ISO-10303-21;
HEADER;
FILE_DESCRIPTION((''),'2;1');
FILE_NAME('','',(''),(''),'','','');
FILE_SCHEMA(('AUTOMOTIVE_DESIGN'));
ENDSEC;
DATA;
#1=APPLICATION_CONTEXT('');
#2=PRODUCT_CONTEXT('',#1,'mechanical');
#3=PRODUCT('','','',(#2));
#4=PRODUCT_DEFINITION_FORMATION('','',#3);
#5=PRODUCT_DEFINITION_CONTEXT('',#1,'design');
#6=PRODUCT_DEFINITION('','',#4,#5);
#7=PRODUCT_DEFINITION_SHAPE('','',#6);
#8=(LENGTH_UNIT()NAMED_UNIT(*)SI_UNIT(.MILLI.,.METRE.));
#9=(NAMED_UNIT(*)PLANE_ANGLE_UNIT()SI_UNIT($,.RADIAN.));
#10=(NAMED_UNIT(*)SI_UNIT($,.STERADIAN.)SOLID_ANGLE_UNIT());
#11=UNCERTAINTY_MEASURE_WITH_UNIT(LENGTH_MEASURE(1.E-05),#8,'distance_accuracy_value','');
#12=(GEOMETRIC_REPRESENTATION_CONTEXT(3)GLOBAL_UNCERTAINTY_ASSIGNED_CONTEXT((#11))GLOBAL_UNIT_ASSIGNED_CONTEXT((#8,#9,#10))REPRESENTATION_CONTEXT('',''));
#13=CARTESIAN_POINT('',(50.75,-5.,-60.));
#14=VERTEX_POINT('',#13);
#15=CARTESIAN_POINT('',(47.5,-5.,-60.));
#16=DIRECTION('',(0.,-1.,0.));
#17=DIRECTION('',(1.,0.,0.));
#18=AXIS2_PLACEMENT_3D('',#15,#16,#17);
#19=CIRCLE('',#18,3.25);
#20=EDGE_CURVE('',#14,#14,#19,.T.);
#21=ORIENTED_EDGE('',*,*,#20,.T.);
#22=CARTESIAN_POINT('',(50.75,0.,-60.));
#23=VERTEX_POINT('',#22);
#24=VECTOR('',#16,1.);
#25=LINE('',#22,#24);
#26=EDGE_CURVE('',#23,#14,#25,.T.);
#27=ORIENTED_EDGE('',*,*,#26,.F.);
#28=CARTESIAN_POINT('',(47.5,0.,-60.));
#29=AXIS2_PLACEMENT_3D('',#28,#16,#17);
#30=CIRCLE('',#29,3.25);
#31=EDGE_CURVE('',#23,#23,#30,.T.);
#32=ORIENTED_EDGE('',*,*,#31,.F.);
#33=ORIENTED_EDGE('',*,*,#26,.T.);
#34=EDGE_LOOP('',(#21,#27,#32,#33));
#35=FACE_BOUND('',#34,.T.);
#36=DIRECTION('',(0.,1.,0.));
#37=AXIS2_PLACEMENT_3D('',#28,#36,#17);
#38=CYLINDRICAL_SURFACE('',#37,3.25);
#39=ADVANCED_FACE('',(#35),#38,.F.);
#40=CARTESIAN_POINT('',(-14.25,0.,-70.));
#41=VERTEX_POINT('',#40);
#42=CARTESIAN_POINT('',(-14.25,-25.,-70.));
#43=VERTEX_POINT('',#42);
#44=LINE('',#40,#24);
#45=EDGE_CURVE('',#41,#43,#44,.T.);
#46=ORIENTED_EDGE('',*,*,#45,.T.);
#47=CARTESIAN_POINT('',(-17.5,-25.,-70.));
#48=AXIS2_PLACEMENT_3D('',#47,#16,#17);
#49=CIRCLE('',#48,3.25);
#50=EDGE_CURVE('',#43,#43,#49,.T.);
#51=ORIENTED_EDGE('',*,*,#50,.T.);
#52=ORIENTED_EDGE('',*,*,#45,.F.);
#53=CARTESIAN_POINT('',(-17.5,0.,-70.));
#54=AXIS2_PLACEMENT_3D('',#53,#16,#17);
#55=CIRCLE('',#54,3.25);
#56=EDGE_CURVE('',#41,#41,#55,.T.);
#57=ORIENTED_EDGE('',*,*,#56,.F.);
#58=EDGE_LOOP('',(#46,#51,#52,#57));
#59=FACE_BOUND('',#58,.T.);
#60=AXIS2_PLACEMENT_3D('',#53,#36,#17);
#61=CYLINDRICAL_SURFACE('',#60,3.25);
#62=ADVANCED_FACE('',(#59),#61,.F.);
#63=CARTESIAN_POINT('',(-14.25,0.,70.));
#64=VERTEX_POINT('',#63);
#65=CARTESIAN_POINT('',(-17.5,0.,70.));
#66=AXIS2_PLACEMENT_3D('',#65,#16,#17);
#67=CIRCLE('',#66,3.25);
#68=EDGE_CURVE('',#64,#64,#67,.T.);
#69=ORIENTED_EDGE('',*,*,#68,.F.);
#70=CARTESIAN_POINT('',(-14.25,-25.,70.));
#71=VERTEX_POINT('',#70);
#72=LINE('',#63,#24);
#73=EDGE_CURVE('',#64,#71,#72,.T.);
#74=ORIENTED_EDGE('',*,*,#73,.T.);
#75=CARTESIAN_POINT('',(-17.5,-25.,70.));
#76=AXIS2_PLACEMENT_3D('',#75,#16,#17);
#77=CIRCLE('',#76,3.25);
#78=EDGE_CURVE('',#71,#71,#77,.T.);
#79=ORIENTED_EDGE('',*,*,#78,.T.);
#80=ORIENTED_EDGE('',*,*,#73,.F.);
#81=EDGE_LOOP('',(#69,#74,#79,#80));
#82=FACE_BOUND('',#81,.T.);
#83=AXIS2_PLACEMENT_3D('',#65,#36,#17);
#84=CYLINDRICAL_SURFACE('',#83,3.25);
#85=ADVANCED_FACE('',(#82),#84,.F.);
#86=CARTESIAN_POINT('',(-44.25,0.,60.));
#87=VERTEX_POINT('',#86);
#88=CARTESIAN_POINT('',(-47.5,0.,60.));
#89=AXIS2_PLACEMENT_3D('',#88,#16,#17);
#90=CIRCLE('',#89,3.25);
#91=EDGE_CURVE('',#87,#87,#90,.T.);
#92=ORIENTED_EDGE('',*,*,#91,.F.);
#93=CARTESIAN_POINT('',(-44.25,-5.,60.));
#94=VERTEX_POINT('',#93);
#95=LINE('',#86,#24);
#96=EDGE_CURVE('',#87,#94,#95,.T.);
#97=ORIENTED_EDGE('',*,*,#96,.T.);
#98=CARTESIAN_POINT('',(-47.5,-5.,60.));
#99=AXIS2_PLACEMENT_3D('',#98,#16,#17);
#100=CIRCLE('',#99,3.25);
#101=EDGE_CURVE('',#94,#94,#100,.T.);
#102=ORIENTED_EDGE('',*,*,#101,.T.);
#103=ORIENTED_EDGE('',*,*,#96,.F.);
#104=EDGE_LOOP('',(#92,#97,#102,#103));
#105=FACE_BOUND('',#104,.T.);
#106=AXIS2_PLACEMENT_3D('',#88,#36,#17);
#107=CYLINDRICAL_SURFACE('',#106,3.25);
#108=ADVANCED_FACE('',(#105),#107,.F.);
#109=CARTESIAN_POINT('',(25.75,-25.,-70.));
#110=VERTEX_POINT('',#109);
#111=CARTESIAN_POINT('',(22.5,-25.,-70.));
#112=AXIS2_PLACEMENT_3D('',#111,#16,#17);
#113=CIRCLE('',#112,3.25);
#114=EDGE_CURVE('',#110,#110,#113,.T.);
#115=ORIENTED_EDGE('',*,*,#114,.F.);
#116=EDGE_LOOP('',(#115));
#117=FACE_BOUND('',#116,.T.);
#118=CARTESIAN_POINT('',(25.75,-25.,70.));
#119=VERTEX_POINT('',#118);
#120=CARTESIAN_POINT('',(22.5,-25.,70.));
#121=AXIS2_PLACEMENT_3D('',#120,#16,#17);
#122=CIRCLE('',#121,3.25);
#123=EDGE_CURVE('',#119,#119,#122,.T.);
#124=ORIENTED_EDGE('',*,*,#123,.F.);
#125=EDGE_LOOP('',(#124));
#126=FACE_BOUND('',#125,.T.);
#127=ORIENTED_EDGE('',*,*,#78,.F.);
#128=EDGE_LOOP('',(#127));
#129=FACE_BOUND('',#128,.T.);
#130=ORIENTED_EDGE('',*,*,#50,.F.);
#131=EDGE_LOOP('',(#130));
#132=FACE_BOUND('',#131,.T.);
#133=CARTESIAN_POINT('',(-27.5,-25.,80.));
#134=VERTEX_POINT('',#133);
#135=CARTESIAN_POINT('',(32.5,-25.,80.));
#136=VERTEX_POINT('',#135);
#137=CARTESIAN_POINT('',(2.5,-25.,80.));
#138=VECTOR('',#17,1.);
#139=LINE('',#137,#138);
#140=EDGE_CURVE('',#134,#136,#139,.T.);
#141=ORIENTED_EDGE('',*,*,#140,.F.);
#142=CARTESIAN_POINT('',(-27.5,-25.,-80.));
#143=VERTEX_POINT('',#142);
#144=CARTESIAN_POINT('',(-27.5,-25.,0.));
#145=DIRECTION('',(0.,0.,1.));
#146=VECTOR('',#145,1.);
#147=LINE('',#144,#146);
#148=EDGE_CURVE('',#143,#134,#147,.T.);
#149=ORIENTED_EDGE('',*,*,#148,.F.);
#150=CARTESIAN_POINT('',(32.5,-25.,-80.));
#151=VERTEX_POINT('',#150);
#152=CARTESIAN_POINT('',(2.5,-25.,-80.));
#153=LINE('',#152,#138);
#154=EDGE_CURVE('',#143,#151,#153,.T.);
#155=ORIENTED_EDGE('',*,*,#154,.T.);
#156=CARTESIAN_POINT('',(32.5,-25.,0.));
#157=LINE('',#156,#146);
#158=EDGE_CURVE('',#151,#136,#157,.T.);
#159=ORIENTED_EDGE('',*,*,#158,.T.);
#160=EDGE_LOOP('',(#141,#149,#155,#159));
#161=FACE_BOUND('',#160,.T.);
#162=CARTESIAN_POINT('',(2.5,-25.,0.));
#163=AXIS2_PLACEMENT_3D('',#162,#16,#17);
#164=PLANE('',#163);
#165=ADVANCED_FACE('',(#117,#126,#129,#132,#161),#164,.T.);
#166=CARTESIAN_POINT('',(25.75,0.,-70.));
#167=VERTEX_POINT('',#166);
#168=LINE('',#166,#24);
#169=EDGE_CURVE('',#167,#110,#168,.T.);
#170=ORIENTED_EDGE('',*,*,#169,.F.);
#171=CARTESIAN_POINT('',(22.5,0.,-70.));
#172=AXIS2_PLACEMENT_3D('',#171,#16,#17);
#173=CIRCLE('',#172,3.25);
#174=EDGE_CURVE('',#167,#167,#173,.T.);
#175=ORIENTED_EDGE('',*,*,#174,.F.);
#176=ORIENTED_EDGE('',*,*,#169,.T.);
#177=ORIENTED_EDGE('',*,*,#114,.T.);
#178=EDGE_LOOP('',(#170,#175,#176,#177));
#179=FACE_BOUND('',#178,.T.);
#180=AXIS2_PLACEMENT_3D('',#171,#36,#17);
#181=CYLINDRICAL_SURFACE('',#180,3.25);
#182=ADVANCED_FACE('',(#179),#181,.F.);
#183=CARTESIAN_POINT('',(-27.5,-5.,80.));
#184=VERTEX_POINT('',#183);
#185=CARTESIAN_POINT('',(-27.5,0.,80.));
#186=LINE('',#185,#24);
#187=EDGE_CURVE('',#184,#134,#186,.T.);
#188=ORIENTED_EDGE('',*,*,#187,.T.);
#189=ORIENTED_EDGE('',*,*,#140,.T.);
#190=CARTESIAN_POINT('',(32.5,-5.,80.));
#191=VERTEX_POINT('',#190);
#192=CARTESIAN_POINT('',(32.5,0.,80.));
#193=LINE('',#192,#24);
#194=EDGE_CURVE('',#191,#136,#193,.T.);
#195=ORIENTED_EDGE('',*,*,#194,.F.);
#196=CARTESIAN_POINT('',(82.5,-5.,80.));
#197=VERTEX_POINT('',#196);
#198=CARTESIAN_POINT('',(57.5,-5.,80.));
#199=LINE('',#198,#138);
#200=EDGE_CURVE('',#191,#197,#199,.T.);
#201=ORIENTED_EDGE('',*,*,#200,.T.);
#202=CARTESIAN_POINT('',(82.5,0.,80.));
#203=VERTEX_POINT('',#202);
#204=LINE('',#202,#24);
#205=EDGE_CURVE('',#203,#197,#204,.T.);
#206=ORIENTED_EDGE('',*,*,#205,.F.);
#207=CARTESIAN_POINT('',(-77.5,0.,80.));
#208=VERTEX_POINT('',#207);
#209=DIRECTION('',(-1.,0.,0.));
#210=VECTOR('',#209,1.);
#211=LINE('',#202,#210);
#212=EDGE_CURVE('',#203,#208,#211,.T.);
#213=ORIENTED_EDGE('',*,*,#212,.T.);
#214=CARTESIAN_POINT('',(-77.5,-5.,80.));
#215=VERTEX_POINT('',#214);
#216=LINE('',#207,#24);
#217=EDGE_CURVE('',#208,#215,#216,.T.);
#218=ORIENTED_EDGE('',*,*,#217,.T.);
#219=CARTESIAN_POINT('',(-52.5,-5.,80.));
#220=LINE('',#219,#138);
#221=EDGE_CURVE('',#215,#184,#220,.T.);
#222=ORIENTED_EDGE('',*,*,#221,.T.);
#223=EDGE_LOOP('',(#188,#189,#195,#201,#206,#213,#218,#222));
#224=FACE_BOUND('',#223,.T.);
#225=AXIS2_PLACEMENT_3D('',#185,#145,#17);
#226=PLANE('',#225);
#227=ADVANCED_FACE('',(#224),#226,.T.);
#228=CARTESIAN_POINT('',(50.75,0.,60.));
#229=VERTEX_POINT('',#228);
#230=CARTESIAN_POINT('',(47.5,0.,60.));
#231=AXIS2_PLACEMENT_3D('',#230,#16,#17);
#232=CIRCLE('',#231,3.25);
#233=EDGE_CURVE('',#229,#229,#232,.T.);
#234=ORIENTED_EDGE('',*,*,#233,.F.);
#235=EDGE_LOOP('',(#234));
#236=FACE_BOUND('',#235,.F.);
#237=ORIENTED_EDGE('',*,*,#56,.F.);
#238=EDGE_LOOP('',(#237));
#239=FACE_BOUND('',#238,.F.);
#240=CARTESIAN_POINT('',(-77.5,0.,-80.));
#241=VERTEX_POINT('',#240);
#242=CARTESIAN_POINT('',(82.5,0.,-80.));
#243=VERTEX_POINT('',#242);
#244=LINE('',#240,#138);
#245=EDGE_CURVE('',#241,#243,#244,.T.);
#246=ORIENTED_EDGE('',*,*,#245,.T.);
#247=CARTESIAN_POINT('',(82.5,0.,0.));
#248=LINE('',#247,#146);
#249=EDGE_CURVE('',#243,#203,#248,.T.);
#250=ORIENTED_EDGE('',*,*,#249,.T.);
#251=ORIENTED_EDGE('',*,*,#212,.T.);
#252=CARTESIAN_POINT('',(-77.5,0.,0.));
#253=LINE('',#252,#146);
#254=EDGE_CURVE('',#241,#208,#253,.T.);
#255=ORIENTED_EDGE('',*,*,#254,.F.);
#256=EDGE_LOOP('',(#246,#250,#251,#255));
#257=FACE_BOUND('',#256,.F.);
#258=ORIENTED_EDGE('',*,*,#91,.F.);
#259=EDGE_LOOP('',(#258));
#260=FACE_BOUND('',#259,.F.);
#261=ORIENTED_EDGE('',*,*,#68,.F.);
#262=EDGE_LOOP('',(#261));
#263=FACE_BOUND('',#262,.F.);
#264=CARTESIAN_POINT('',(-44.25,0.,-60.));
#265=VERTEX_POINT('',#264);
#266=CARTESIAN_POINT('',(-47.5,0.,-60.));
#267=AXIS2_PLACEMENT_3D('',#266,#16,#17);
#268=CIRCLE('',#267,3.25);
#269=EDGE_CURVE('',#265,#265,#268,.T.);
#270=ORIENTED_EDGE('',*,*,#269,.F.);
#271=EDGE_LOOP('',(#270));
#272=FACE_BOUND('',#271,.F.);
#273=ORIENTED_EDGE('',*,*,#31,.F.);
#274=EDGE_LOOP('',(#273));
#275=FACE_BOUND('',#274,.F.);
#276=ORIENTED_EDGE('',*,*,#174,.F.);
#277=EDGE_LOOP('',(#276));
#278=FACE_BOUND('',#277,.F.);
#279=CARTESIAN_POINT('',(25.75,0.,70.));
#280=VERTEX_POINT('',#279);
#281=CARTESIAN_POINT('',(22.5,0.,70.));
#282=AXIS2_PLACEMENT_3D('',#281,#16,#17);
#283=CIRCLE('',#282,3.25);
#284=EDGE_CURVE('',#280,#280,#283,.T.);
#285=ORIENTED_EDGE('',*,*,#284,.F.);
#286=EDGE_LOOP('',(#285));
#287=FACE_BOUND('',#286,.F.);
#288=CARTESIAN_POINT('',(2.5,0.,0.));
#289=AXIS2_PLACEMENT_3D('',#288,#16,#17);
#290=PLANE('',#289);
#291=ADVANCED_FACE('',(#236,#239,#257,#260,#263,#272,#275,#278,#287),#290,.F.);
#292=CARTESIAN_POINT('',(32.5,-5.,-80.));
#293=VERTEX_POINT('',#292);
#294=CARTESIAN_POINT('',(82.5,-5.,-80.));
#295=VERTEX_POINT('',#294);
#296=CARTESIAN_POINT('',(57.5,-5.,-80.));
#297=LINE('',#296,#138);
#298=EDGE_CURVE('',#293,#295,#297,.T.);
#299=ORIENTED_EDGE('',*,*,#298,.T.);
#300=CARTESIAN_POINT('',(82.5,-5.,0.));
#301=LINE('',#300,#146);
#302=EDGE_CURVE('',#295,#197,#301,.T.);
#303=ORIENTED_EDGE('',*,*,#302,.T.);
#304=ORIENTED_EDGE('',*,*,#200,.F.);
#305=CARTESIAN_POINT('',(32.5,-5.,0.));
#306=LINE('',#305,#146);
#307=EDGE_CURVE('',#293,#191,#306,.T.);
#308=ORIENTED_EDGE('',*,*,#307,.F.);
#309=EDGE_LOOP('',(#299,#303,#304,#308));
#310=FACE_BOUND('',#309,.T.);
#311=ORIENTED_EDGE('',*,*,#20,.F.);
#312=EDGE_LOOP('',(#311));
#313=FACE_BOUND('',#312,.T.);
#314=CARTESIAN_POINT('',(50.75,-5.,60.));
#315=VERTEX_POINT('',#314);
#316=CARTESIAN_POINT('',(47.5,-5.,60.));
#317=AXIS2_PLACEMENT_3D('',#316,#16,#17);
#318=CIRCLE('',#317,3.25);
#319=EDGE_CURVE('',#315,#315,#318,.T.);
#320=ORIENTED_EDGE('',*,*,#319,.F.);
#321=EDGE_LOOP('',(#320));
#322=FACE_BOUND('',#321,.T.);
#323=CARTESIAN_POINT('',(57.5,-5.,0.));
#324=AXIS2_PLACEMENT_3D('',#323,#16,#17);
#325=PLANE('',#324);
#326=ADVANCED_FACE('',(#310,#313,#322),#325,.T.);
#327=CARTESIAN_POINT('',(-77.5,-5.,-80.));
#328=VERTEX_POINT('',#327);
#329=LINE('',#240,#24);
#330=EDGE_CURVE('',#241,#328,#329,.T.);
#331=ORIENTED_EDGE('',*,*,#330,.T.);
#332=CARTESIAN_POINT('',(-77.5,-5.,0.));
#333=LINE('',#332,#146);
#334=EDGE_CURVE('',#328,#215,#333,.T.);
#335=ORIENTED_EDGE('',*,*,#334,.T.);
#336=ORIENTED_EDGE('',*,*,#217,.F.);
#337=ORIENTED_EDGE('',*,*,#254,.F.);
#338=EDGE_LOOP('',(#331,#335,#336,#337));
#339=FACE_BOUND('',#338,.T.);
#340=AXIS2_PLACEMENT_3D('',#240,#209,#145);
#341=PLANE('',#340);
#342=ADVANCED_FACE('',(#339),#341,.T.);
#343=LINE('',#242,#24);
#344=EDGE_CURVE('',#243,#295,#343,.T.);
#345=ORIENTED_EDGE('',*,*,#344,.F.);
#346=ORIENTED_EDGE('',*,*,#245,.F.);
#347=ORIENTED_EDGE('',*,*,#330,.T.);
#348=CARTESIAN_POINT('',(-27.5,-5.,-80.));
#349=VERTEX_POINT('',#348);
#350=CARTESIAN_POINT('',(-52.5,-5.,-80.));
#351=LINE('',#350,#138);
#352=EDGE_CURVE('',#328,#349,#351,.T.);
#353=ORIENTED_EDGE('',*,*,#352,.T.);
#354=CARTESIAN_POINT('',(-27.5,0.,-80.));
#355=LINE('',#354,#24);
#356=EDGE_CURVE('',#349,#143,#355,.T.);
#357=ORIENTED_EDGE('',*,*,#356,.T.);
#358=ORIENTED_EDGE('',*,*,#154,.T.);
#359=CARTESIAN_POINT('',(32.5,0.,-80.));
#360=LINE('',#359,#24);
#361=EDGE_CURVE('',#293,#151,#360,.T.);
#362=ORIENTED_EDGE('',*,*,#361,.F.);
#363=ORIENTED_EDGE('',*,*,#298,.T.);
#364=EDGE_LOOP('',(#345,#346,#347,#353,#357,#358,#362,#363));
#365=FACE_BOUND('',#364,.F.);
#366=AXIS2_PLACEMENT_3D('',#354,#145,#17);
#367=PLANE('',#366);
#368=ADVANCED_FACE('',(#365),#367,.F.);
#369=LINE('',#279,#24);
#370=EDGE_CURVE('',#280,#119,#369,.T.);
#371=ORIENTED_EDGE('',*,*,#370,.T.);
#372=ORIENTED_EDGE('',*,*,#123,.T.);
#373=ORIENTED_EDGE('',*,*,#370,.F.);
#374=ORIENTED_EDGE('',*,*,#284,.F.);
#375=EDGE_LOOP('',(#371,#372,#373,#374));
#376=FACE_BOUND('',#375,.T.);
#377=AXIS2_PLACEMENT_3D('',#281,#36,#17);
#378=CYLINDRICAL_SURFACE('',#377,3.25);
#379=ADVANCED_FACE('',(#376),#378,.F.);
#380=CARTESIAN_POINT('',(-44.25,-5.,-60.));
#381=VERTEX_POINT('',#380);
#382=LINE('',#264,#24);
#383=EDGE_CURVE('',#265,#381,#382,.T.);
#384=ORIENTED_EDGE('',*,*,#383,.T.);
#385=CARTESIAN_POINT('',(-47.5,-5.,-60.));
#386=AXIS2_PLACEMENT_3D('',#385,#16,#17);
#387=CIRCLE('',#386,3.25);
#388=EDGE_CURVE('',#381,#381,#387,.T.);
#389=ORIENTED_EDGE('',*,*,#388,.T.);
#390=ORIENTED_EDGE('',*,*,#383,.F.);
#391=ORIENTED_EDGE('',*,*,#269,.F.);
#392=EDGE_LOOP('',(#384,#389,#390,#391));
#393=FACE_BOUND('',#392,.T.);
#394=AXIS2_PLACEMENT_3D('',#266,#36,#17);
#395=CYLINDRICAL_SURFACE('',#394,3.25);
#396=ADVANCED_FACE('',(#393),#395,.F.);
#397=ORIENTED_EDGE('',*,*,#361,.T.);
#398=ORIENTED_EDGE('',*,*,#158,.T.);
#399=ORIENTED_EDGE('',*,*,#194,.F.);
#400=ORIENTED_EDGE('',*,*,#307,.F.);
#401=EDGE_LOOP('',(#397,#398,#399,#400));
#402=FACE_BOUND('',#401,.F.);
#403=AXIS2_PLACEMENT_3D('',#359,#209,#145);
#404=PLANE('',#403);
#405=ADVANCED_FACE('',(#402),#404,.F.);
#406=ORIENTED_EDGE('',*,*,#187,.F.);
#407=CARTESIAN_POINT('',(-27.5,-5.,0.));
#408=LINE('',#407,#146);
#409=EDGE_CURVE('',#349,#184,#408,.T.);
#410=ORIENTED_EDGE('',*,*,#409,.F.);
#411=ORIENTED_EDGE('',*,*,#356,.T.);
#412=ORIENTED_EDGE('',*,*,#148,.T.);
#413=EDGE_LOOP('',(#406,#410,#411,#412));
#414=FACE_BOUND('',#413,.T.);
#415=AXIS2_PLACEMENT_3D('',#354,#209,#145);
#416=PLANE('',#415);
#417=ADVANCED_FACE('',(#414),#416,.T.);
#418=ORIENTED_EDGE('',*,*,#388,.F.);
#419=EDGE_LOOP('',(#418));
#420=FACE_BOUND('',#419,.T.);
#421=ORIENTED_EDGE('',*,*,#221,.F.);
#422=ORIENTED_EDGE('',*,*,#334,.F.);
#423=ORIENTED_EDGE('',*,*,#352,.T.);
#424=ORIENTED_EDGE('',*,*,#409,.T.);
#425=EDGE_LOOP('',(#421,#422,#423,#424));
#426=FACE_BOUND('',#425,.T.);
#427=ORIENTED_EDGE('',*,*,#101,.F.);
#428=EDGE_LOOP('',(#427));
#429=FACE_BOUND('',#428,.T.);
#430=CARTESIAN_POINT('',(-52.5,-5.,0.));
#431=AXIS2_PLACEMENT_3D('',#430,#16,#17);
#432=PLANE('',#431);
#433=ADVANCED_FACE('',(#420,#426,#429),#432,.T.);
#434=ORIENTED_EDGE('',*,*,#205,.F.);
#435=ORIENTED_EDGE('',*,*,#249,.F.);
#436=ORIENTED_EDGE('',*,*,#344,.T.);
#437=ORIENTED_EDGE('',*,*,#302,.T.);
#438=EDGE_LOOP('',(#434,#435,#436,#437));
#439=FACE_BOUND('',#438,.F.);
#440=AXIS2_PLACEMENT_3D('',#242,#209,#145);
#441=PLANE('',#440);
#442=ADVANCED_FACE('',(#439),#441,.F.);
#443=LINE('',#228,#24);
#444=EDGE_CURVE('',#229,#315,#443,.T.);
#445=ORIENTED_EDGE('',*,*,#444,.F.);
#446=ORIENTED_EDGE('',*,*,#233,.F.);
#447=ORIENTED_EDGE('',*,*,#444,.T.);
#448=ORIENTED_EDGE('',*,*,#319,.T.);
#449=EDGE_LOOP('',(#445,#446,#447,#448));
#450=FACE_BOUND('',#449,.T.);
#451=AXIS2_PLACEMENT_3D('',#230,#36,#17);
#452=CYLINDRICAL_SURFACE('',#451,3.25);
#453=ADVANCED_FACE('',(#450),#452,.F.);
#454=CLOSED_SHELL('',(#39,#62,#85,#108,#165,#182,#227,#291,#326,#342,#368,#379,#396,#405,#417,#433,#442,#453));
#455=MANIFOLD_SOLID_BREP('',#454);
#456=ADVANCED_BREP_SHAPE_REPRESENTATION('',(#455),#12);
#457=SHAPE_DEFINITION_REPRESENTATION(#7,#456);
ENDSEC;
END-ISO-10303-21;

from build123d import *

# Parameters (mm, degrees)
F0_W     = 50
F0_H     = 160
F0_R     = 3.25
F1_DEPTH = 5
F0_W_2   = 60
F2_DEPTH = 25


# Not quite as in the source:
# - a feature names something its author has since deleted; it is built from what else it names


with BuildPart() as f1:
    # F0 (on Front) → F1 (new body)
    with BuildSketch(Plane.XZ):
        with Locations((-52.5, 0)):
            Rectangle(F0_W, F0_H)
        with Locations((-47.5, -60)):
            Circle(F0_R, mode=Mode.SUBTRACT)
        with Locations((-47.5, 60)):
            Circle(F0_R, mode=Mode.SUBTRACT)
    extrude(amount=F1_DEPTH)



with BuildPart() as f1b:
    # F0 (on Front) → F1, piece 2 (new body)
    with BuildSketch(Plane.XZ):
        with Locations((57.5, 0)):
            Rectangle(F0_W, F0_H)
        with Locations((47.5, -60)):
            Circle(F0_R, mode=Mode.SUBTRACT)
        with Locations((47.5, 60)):
            Circle(F0_R, mode=Mode.SUBTRACT)
    extrude(amount=F1_DEPTH)


with BuildPart() as f1_1:
    add(f1.part)

    add(f1b.part)  # F2 merges F1b
    # F0 (on Front) → F2 (join)
    with BuildSketch(Plane.XZ):
        with Locations((2.5, 0)):
            Rectangle(F0_W_2, F0_H)
        with Locations((-17.5, -70)):
            Circle(F0_R, mode=Mode.SUBTRACT)
        with Locations((22.5, -70)):
            Circle(F0_R, mode=Mode.SUBTRACT)
        with Locations((-17.5, 70)):
            Circle(F0_R, mode=Mode.SUBTRACT)
        with Locations((22.5, 70)):
            Circle(F0_R, mode=Mode.SUBTRACT)
    extrude(amount=F2_DEPTH)


solid = f1_1.part
